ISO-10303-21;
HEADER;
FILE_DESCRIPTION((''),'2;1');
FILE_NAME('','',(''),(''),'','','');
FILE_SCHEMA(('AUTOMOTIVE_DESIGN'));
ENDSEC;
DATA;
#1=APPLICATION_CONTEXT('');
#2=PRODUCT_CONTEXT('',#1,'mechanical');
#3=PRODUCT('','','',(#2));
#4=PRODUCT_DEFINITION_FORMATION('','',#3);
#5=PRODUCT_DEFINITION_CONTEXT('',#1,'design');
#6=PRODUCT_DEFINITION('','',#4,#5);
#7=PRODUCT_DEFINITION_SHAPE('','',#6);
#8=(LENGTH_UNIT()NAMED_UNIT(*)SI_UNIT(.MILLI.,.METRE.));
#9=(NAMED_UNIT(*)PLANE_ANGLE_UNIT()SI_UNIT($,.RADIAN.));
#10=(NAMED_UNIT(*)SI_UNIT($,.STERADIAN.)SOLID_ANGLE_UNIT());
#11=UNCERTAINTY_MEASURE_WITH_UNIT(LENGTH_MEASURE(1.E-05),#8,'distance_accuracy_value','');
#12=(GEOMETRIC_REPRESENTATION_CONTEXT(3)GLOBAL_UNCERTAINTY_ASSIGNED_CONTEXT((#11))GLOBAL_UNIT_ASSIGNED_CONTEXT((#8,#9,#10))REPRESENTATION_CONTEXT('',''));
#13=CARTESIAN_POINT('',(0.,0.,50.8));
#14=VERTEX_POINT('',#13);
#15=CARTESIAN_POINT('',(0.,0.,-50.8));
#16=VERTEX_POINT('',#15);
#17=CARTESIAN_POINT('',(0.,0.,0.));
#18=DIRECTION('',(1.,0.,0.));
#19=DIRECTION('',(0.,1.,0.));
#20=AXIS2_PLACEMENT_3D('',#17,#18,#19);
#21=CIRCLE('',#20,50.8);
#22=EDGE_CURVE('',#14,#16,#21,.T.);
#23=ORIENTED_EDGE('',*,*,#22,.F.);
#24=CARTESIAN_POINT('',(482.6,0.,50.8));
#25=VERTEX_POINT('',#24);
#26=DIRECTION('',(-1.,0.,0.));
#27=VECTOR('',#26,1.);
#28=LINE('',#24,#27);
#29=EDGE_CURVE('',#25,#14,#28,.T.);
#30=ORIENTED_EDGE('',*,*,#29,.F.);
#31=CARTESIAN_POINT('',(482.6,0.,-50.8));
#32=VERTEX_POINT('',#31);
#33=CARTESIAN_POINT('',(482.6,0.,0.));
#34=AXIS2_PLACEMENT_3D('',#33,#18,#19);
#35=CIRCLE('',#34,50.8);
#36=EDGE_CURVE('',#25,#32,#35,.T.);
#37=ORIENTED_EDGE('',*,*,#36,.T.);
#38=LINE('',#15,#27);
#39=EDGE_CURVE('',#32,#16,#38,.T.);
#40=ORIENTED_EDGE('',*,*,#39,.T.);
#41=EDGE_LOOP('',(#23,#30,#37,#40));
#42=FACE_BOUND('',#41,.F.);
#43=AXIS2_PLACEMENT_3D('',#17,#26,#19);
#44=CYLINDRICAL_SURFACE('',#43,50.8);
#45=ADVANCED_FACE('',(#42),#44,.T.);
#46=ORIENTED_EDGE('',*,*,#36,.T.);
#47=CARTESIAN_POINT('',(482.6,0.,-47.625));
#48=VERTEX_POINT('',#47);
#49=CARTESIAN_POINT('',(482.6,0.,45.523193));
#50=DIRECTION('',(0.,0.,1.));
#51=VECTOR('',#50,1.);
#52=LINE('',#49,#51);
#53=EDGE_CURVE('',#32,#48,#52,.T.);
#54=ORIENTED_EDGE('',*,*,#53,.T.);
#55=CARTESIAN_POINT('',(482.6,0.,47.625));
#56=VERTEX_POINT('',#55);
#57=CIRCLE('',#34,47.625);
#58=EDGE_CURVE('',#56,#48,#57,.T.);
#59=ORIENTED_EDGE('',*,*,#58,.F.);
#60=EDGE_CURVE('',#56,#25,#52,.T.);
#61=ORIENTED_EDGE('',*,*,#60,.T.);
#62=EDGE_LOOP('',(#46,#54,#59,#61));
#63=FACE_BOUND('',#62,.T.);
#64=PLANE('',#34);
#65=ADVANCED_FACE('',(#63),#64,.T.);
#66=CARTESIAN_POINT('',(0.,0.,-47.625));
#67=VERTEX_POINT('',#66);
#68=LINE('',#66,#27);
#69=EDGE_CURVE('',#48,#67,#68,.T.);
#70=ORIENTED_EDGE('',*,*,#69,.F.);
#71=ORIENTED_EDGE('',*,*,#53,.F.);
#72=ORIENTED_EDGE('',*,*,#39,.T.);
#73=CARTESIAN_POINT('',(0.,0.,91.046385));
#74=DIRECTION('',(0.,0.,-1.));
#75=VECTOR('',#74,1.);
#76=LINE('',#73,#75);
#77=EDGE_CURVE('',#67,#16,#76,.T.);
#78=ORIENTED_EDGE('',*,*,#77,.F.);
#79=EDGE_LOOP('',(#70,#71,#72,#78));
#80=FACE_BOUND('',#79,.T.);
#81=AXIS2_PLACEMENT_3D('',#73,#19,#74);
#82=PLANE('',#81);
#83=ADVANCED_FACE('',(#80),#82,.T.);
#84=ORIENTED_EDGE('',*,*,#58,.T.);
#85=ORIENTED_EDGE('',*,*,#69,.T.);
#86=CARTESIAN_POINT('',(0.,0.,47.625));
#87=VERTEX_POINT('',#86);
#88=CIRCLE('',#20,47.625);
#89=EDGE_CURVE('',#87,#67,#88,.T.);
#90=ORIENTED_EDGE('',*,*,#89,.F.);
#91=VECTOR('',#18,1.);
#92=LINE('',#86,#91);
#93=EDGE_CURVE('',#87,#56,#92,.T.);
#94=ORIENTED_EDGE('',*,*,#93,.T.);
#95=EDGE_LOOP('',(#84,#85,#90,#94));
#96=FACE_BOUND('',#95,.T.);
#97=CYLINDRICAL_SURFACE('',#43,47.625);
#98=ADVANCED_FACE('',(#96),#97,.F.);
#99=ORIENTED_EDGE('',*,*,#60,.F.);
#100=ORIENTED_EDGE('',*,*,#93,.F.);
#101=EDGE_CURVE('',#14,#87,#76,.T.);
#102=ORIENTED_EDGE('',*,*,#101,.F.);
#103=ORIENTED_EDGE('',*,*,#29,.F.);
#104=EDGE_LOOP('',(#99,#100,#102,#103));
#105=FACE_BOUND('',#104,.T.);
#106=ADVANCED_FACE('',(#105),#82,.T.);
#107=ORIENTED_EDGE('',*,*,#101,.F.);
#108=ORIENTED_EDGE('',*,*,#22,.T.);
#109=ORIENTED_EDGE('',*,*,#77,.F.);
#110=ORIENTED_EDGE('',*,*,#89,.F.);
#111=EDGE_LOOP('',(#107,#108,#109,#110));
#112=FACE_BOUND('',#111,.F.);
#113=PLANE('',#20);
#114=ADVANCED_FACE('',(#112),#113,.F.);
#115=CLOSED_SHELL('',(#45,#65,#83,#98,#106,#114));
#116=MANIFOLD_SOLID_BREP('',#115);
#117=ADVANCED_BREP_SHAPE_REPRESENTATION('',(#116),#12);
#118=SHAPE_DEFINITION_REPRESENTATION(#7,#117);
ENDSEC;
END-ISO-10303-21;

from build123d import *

# Parameters (mm, degrees)
F0_R      = 50.8
F0_R_2    = 47.625
F1_DEPTH  = 482.6
F4_DEPTH  = 508
F5_W      = 55.5464364588
F5_H      = 92.0769795775
F6_DEPTH  = 508
F7_W      = 106.5891161561
F7_H      = 48.0401627719
F8_DEPTH  = 101.6
F9_W      = 58.4661662579
F9_H      = 32.7058173716
F10_DEPTH = 82.55


# Not quite as in the source:
# - the program builds the solid bodies; features that only make, move or delete a surface that nothing else refers to are left out


with BuildPart() as f1:
    # F0 (on Right) → F1 (new body)
    with BuildSketch(Plane.YZ):
        Circle(F0_R)
        Circle(F0_R_2, mode=Mode.SUBTRACT)
    extrude(amount=F1_DEPTH)

    # F3 (on Right) → F4 (cut)
    with BuildSketch(Plane.YZ):
        Polygon((0, 91.0463854671), (0, 0), (0, -77.0941823721), (61.9923658669, -77.0941823721), (61.9923658669, 91.0463854671), align=None)
    extrude(amount=F4_DEPTH, mode=Mode.SUBTRACT)

    # F5 (on Right) → F6 (cut)
    with BuildSketch(Plane.YZ):
        with Locations((27.7732182294, 46.0384897888)):
            Rectangle(F5_W, F5_H)
    extrude(amount=F6_DEPTH, mode=Mode.SUBTRACT)

    # F7 (on Top) → F8 (cut)
    with BuildSketch(Plane.XY):
        with Locations((53.2945580781, 24.020081386)):
            Rectangle(F7_W, F7_H)
    extrude(amount=F8_DEPTH, mode=Mode.SUBTRACT)

    # F9 (on Top) → F10 (cut)
    with BuildSketch(Plane.XY):
        with Locations((77.5640532374, 16.3529086858)):
            Rectangle(F9_W, F9_H)
    extrude(amount=F10_DEPTH, mode=Mode.SUBTRACT)


solid = f1.part
